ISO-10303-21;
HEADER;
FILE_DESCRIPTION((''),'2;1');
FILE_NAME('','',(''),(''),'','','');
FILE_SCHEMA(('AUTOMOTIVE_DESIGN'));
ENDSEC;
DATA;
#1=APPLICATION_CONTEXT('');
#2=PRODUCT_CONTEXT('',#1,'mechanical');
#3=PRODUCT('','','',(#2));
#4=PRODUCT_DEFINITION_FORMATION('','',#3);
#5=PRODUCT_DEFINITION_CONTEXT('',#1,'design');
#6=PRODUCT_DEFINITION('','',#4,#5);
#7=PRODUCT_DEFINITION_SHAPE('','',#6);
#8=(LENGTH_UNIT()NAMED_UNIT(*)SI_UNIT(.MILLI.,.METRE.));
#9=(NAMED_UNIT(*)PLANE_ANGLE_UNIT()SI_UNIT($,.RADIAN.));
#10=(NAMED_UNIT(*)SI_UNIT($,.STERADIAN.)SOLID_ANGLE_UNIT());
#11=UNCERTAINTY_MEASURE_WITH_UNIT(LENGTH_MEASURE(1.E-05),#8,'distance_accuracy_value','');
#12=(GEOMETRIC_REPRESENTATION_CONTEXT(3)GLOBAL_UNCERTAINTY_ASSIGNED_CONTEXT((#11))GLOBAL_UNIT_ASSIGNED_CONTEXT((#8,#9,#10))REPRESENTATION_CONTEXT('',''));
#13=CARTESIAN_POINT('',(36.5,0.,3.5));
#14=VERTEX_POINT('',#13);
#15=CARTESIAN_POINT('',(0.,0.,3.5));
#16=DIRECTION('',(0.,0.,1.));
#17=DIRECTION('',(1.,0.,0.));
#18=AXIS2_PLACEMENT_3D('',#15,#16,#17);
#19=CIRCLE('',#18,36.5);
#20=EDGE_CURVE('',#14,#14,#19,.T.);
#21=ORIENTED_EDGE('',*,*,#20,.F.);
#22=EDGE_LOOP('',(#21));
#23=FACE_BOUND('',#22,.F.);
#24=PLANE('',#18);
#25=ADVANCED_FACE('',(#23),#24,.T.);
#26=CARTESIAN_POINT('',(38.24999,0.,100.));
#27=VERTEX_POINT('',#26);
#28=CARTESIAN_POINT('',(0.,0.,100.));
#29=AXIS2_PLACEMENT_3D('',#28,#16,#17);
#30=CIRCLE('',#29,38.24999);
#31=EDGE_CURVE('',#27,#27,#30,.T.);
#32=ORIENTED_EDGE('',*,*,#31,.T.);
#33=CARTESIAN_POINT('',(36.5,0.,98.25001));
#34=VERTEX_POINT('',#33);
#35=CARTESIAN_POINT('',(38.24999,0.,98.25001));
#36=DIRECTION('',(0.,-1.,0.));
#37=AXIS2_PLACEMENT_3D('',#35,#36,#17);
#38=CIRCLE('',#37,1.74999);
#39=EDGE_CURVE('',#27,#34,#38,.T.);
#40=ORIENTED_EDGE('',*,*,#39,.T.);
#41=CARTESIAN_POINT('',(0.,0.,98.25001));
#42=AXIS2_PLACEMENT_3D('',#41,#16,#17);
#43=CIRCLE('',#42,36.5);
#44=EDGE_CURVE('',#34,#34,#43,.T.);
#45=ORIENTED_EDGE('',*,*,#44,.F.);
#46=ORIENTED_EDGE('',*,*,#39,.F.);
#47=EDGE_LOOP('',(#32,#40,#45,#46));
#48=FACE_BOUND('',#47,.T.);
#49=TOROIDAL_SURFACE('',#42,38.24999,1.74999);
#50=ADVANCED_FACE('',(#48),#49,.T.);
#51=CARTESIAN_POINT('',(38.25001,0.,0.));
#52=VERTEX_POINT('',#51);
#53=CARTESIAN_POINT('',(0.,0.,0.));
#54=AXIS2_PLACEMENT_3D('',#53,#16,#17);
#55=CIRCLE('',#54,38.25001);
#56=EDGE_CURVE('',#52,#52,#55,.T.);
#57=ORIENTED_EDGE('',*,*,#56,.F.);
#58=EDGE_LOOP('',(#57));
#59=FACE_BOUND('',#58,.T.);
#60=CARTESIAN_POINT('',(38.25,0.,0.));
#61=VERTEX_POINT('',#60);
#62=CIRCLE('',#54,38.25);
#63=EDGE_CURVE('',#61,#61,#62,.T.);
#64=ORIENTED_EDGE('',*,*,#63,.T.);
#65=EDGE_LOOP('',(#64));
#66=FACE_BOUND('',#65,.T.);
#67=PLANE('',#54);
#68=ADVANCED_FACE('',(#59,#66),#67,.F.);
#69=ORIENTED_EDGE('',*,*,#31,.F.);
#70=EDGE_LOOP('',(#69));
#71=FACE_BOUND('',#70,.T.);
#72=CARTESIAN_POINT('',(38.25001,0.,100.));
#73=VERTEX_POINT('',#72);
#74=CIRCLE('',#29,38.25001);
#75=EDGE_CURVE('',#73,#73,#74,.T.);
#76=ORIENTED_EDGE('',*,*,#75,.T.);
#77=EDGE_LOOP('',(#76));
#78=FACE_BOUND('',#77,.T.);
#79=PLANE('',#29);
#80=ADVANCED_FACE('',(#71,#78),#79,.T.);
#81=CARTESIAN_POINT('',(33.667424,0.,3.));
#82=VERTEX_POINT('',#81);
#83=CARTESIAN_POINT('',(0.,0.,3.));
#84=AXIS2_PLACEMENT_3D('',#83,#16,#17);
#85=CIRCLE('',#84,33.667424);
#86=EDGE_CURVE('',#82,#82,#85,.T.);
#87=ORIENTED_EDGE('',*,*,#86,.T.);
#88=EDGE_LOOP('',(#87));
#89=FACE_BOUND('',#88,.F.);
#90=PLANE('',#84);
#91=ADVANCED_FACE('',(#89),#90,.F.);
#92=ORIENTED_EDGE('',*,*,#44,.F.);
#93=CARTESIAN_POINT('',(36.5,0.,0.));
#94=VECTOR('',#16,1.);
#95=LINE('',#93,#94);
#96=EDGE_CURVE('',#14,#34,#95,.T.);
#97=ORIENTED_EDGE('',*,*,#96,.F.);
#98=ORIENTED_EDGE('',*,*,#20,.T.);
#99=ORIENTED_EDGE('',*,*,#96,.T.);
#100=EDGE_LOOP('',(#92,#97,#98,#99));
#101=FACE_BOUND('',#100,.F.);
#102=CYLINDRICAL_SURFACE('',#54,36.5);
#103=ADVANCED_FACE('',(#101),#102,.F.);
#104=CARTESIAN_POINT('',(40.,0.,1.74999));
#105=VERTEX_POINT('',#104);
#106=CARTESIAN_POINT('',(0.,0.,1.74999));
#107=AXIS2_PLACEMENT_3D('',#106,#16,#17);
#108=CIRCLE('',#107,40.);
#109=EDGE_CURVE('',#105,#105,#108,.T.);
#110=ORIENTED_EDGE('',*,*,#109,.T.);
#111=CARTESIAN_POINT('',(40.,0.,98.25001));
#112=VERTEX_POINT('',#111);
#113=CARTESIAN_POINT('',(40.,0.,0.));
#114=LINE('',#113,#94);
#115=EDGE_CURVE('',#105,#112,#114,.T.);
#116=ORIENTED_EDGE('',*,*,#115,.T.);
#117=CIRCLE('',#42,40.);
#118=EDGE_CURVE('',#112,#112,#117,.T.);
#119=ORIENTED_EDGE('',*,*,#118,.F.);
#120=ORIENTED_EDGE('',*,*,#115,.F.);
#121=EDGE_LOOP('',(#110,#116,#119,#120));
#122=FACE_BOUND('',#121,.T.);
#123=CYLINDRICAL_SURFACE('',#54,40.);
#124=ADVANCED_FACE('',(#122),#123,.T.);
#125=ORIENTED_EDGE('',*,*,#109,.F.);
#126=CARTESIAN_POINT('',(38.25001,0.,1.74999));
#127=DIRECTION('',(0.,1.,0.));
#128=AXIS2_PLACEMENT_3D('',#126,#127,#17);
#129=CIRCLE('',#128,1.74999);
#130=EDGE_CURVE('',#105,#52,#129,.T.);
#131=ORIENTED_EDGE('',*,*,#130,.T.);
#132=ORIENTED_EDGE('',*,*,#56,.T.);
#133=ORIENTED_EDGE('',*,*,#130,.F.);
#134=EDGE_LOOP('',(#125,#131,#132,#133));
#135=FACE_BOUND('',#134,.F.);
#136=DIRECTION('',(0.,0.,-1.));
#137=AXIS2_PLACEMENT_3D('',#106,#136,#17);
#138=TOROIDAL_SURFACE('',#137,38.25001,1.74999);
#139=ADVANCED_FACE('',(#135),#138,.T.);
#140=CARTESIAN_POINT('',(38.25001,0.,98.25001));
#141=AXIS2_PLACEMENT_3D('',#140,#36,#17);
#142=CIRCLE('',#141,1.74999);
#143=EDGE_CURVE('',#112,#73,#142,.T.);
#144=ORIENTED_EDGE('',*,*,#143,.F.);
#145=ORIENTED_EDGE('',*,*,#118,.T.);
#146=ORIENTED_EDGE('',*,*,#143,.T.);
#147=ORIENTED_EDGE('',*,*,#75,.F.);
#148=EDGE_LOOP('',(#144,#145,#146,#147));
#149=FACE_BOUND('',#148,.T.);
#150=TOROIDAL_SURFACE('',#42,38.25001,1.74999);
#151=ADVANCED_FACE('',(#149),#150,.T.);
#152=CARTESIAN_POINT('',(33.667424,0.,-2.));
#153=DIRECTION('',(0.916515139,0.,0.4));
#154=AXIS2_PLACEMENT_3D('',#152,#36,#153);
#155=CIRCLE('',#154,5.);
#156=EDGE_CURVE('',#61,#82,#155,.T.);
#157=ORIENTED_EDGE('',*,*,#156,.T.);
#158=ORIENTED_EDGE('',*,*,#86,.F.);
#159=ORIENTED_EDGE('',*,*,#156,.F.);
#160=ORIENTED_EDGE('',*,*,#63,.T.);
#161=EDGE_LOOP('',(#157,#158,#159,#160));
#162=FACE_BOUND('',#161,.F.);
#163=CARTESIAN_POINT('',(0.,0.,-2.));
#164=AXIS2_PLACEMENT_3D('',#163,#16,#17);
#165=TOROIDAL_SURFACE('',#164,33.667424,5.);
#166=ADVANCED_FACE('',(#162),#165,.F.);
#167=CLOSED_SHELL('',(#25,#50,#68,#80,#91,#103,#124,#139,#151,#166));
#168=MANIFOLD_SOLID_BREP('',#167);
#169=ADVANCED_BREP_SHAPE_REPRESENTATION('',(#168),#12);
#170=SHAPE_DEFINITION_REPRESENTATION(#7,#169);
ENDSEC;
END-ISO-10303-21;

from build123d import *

# Parameters (mm, degrees)
F2_T     = -3.5
F3_R     = 1.74999
F4_R     = 38.25
F5_DEPTH = 3
F6_R     = 1.74999


# Not quite as in the source:
# - a fillet or chamfer that OpenCascade refuses, or shapes differently, is made with other operations: its cross-section is extruded or revolved along the edge and cut away or added
# - a fillet or chamfer is up to 0.001 mm smaller than in the source, because OpenCascade refuses the exact size


with BuildPart() as f1:
    # F0 (on Front) → F1 (revolve)
    with BuildSketch(Plane.XZ):
        with BuildLine():
            Line((0, 100), (0, 0))
            Line((0, 0), (40, 0))
            Line((40, 0), (40, 9.3798986314))
            add(Edge.make_bspline(
                [(40, 9.3798986314), (36.3615811377, 9.5180089921), (32.7559413641, 9.8779920191), (29.1503015906, 10.237975046)],
                knots=[0.9214250826, 0.9214250826, 0.9214250826, 0.9214250826, 1, 1, 1, 1], degree=3))
            Line((29.1503015906, 10.237975046), (30.0444061749, 19.1934501913))
            add(Edge.make_bspline(
                [(40, 18.3365735612), (39.0117054739, 18.370443261), (36.643767227, 18.4954262507), (33.3320197728, 18.8677992603), (31.0010337577, 19.1072868184), (30.0444061749, 19.1934501913)],
                knots=[113.3617815831, 113.3617815831, 113.3617815831, 113.3617815831, 116.3275721529, 120.4741421163, 123.3563956747, 123.3563956747, 123.3563956747, 123.3563956747], degree=3))
            Line((40, 18.3365735612), (40, 73.0902536278))
            add(Edge.make_bspline(
                [(31.7338511682, 71.8869126854), (32.4007501321, 71.9844232047), (34.386427689, 72.278853309), (37.1398587874, 72.6929898238), (39.229939508, 72.9860445189), (40, 73.0902536278)],
                knots=[0, 0, 0, 0, 2.0219920564, 6.0221045926, 8.3532693238, 8.3532693238, 8.3532693238, 8.3532693238], degree=3))
            Line((31.7338511682, 71.8869126854), (30.4177049547, 80.7901546359))
            add(Edge.make_bspline(
                [(30.4177049547, 80.7901546359), (33.6321840052, 81.2653438371), (36.8466630556, 81.7405330383), (40, 82.1441317937)],
                knots=[0, 0, 0, 0, 0.0502198484, 0.0502198484, 0.0502198484, 0.0502198484], degree=3))
            Line((40, 82.1441317937), (40, 100))
            Line((40, 100), (0, 100))
        make_face()
        with BuildLine():
            Line((40, 73.0902536278), (40, 82.1441317937))
            add(Edge.make_bspline(
                [(30.4177049547, 80.7901546359), (33.6321840052, 81.2653438371), (36.8466630556, 81.7405330383), (40, 82.1441317937)],
                knots=[0, 0, 0, 0, 0.0502198484, 0.0502198484, 0.0502198484, 0.0502198484], degree=3))
            Line((30.4177049547, 80.7901546359), (31.7338511682, 71.8869126854))
            add(Edge.make_bspline(
                [(31.7338511682, 71.8869126854), (32.4007501321, 71.9844232047), (34.386427689, 72.278853309), (37.1398587874, 72.6929898238), (39.229939508, 72.9860445189), (40, 73.0902536278)],
                knots=[0, 0, 0, 0, 2.0219920564, 6.0221045926, 8.3532693238, 8.3532693238, 8.3532693238, 8.3532693238], degree=3))
        make_face()
        with BuildLine():
            add(Edge.make_bspline(
                [(40, 9.3798986314), (36.3615811377, 9.5180089921), (32.7559413641, 9.8779920191), (29.1503015906, 10.237975046)],
                knots=[0.9214250826, 0.9214250826, 0.9214250826, 0.9214250826, 1, 1, 1, 1], degree=3))
            Line((40, 9.3798986314), (40, 18.3365735612))
            add(Edge.make_bspline(
                [(40, 18.3365735612), (39.0117054739, 18.370443261), (36.643767227, 18.4954262507), (33.3320197728, 18.8677992603), (31.0010337577, 19.1072868184), (30.0444061749, 19.1934501913)],
                knots=[113.3617815831, 113.3617815831, 113.3617815831, 113.3617815831, 116.3275721529, 120.4741421163, 123.3563956747, 123.3563956747, 123.3563956747, 123.3563956747], degree=3))
            Line((30.0444061749, 19.1934501913), (29.1503015906, 10.237975046))
        make_face()
    revolve(axis=Axis((0, 0, 50), (0, 0, 1)))

    # F2
    f2_openings = [f1.faces().sort_by_distance(p)[0] for p in [
        (0, 0, 100),
    ]]
    offset(amount=F2_T, openings=f2_openings)

    # F3 (radius 1.75 in the source; OpenCascade refuses exactly that, so slightly less here)
    f3_edges = [f1.edges().sort_by_distance(p)[0] for p in [
        (-40, 0, 100),
        (-36.5, 0, 100),
    ]]
    fillet(f3_edges, radius=F3_R)

    # F4 (on Top) → F5 (cut)
    with BuildSketch(Plane.XY):
        Circle(F4_R)
    extrude(amount=F5_DEPTH, mode=Mode.SUBTRACT)

    # F6 (radius 1.75 in the source; OpenCascade refuses exactly that, so slightly less here)
    f6_edges = [f1.edges().sort_by_distance(p)[0] for p in [
        (-40, 0, 0),
    ]]
    fillet(f6_edges, radius=F6_R)

    # F7: fillet of radius 5 on 1 edges, made by hand

    # F7_s1 → F7_t2 (revolve)
    with BuildSketch(Plane.XZ):
        with BuildLine():
            ThreePointArc((38.25, 0), (36.4060370926, 2.1833001327), (33.667424305, 3))
            Line((33.667424305, 3), (38.25, 3))
            Line((38.25, 3), (38.25, 0))
        make_face()
    revolve(axis=Axis((0, 0, 3), (0, 0, 1)))


solid = f1.part
